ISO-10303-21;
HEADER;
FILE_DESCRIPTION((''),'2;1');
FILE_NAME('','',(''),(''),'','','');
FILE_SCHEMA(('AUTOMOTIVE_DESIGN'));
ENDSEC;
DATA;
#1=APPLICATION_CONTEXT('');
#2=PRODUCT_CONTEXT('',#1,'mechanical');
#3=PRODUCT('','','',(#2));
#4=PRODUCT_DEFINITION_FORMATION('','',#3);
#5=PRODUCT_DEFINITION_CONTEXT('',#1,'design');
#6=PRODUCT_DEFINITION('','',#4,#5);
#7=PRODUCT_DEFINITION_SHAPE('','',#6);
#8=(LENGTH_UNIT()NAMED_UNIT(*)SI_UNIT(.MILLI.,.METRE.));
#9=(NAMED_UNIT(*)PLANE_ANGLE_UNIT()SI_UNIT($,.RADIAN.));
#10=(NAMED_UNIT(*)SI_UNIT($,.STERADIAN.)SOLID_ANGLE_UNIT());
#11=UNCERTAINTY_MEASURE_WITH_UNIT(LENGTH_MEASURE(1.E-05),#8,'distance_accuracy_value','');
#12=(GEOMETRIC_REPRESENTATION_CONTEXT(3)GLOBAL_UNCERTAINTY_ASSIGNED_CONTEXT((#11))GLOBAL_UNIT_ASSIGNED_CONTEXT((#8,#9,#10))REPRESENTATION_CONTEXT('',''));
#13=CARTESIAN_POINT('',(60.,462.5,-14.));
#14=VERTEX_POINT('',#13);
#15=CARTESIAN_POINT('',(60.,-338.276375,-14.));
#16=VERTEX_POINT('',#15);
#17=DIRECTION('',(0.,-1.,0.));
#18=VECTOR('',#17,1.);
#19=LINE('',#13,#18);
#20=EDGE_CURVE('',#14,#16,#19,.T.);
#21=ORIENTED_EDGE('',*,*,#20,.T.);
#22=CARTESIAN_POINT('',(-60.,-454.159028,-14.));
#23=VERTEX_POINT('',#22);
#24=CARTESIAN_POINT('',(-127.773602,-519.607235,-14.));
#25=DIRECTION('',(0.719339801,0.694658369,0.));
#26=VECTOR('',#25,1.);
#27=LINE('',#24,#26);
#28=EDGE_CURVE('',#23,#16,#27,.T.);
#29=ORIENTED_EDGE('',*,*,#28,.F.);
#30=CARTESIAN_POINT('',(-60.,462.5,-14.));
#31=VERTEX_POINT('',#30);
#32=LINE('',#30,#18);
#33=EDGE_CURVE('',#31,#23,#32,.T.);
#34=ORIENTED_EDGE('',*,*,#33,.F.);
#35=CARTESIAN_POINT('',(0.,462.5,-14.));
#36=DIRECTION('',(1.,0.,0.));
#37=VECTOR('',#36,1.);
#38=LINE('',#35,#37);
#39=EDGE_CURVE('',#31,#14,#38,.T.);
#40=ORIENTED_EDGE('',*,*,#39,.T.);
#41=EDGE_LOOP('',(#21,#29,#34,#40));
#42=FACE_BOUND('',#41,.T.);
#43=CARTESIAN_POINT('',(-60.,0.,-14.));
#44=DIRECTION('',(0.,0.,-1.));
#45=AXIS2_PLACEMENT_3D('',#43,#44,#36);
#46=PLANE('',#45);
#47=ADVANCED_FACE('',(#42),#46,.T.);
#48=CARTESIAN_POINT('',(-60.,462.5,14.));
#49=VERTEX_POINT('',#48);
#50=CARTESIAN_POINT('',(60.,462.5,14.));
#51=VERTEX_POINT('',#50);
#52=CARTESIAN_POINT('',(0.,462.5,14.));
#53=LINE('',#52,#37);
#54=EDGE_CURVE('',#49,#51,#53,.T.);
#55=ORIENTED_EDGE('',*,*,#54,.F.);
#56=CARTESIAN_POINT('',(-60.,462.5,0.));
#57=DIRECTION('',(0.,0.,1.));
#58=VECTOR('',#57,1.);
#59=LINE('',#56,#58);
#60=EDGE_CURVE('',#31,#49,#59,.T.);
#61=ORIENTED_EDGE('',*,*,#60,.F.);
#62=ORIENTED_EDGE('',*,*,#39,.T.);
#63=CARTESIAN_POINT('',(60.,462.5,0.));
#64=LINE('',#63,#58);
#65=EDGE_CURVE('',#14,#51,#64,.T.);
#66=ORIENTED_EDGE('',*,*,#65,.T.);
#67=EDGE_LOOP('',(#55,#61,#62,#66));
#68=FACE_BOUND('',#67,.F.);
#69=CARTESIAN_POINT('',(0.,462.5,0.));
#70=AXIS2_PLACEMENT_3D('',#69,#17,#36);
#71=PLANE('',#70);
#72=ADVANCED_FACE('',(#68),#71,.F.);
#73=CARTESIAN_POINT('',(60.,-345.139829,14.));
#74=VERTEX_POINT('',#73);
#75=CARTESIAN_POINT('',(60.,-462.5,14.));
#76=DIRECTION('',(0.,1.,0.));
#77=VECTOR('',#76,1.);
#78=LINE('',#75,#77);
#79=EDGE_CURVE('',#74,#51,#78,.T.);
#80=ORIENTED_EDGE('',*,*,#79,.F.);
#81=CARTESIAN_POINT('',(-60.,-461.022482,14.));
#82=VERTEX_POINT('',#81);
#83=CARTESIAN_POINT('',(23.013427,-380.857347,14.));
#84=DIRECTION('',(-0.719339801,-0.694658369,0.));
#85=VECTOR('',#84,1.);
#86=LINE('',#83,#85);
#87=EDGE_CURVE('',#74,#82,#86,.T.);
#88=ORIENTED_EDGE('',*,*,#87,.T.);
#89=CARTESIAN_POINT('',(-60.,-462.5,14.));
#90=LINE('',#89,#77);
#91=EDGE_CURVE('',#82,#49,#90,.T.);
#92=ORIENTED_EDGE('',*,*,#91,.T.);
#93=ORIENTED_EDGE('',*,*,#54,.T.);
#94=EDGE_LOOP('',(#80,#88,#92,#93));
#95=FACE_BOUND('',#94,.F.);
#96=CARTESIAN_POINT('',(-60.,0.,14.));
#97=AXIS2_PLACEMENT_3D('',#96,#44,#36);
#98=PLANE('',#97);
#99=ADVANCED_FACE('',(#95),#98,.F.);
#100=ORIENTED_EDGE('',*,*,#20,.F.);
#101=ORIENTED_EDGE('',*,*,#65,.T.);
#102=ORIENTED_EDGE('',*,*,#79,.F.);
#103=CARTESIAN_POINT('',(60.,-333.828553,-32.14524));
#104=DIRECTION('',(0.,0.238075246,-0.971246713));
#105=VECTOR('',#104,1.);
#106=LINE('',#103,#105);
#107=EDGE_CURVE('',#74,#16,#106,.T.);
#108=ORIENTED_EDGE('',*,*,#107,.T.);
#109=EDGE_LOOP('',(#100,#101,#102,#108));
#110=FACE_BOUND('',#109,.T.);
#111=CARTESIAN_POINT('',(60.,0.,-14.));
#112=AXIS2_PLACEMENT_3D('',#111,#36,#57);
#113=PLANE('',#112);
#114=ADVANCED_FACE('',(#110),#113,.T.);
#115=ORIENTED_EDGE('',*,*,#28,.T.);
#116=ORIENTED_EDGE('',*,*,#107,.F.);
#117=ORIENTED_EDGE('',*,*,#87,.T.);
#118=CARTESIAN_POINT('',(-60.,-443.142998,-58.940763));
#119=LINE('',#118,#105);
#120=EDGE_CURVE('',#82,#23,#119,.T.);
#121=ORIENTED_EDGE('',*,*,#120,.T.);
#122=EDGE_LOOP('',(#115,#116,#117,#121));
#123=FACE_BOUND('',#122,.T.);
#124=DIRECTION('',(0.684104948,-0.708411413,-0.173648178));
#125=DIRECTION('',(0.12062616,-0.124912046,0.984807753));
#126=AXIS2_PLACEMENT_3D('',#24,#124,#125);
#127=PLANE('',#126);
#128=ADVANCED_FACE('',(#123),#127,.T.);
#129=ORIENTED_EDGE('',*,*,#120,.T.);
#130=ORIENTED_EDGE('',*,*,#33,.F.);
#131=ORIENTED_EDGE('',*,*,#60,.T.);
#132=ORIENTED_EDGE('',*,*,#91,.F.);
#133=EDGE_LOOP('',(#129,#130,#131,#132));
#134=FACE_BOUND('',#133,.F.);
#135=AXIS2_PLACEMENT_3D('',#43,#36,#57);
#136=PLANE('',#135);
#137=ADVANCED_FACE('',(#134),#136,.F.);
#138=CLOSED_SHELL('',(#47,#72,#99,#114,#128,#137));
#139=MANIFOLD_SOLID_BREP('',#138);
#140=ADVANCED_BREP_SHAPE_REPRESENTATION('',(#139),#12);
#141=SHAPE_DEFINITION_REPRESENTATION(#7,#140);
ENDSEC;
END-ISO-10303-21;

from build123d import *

# Parameters (mm, degrees)
F0_W        = 120
F0_H        = 28
F1_DEPTH    = 462.5
F2_SIZE2    = 115.882643
F2_SIZE     = 119.99999
F3_T1_DEPTH = 343.6641668027


# Not quite as in the source:
# - a fillet or chamfer that OpenCascade refuses, or shapes differently, is made with other operations: its cross-section is extruded or revolved along the edge and cut away or added
# - a fillet or chamfer is up to 0.001 mm smaller than in the source, because OpenCascade refuses the exact size


with BuildPart() as f1:
    # F0 (on Front) → F1 (new body, symmetric)
    with BuildSketch(Plane.XZ):
        Rectangle(F0_W, F0_H)
    extrude(amount=F1_DEPTH, both=True)

    # F2 (size 120 and 115.8826529768 in the source; OpenCascade refuses exactly that, so slightly less here)
    f2_edges = [f1.edges().sort_by_distance(p)[0] for p in [
        (60, -462.5, 0),
    ]]
    f2_side = f1.faces().sort_by_distance((0, -462.5, 0))[0]
    chamfer(f2_edges, length=F2_SIZE, length2=F2_SIZE2, reference=f2_side)

    # F3: chamfer of 6 x 34.0276909177 on 2 edges, made by hand

    # F3_s2 → F3_t1 (cut)
    with BuildSketch(Plane(origin=(-325.7617702656, -314.5844839382, 0), x_dir=(0, 0, 1), z_dir=(0.7193398013, 0.6946583695, 0))):
        Polygon((-14, 285.0151628785), (20.0276909177, 291.0151628785), (-14, 291.0151628785), align=None)
    extrude(amount=F3_T1_DEPTH, mode=Mode.SUBTRACT)


solid = f1.part
